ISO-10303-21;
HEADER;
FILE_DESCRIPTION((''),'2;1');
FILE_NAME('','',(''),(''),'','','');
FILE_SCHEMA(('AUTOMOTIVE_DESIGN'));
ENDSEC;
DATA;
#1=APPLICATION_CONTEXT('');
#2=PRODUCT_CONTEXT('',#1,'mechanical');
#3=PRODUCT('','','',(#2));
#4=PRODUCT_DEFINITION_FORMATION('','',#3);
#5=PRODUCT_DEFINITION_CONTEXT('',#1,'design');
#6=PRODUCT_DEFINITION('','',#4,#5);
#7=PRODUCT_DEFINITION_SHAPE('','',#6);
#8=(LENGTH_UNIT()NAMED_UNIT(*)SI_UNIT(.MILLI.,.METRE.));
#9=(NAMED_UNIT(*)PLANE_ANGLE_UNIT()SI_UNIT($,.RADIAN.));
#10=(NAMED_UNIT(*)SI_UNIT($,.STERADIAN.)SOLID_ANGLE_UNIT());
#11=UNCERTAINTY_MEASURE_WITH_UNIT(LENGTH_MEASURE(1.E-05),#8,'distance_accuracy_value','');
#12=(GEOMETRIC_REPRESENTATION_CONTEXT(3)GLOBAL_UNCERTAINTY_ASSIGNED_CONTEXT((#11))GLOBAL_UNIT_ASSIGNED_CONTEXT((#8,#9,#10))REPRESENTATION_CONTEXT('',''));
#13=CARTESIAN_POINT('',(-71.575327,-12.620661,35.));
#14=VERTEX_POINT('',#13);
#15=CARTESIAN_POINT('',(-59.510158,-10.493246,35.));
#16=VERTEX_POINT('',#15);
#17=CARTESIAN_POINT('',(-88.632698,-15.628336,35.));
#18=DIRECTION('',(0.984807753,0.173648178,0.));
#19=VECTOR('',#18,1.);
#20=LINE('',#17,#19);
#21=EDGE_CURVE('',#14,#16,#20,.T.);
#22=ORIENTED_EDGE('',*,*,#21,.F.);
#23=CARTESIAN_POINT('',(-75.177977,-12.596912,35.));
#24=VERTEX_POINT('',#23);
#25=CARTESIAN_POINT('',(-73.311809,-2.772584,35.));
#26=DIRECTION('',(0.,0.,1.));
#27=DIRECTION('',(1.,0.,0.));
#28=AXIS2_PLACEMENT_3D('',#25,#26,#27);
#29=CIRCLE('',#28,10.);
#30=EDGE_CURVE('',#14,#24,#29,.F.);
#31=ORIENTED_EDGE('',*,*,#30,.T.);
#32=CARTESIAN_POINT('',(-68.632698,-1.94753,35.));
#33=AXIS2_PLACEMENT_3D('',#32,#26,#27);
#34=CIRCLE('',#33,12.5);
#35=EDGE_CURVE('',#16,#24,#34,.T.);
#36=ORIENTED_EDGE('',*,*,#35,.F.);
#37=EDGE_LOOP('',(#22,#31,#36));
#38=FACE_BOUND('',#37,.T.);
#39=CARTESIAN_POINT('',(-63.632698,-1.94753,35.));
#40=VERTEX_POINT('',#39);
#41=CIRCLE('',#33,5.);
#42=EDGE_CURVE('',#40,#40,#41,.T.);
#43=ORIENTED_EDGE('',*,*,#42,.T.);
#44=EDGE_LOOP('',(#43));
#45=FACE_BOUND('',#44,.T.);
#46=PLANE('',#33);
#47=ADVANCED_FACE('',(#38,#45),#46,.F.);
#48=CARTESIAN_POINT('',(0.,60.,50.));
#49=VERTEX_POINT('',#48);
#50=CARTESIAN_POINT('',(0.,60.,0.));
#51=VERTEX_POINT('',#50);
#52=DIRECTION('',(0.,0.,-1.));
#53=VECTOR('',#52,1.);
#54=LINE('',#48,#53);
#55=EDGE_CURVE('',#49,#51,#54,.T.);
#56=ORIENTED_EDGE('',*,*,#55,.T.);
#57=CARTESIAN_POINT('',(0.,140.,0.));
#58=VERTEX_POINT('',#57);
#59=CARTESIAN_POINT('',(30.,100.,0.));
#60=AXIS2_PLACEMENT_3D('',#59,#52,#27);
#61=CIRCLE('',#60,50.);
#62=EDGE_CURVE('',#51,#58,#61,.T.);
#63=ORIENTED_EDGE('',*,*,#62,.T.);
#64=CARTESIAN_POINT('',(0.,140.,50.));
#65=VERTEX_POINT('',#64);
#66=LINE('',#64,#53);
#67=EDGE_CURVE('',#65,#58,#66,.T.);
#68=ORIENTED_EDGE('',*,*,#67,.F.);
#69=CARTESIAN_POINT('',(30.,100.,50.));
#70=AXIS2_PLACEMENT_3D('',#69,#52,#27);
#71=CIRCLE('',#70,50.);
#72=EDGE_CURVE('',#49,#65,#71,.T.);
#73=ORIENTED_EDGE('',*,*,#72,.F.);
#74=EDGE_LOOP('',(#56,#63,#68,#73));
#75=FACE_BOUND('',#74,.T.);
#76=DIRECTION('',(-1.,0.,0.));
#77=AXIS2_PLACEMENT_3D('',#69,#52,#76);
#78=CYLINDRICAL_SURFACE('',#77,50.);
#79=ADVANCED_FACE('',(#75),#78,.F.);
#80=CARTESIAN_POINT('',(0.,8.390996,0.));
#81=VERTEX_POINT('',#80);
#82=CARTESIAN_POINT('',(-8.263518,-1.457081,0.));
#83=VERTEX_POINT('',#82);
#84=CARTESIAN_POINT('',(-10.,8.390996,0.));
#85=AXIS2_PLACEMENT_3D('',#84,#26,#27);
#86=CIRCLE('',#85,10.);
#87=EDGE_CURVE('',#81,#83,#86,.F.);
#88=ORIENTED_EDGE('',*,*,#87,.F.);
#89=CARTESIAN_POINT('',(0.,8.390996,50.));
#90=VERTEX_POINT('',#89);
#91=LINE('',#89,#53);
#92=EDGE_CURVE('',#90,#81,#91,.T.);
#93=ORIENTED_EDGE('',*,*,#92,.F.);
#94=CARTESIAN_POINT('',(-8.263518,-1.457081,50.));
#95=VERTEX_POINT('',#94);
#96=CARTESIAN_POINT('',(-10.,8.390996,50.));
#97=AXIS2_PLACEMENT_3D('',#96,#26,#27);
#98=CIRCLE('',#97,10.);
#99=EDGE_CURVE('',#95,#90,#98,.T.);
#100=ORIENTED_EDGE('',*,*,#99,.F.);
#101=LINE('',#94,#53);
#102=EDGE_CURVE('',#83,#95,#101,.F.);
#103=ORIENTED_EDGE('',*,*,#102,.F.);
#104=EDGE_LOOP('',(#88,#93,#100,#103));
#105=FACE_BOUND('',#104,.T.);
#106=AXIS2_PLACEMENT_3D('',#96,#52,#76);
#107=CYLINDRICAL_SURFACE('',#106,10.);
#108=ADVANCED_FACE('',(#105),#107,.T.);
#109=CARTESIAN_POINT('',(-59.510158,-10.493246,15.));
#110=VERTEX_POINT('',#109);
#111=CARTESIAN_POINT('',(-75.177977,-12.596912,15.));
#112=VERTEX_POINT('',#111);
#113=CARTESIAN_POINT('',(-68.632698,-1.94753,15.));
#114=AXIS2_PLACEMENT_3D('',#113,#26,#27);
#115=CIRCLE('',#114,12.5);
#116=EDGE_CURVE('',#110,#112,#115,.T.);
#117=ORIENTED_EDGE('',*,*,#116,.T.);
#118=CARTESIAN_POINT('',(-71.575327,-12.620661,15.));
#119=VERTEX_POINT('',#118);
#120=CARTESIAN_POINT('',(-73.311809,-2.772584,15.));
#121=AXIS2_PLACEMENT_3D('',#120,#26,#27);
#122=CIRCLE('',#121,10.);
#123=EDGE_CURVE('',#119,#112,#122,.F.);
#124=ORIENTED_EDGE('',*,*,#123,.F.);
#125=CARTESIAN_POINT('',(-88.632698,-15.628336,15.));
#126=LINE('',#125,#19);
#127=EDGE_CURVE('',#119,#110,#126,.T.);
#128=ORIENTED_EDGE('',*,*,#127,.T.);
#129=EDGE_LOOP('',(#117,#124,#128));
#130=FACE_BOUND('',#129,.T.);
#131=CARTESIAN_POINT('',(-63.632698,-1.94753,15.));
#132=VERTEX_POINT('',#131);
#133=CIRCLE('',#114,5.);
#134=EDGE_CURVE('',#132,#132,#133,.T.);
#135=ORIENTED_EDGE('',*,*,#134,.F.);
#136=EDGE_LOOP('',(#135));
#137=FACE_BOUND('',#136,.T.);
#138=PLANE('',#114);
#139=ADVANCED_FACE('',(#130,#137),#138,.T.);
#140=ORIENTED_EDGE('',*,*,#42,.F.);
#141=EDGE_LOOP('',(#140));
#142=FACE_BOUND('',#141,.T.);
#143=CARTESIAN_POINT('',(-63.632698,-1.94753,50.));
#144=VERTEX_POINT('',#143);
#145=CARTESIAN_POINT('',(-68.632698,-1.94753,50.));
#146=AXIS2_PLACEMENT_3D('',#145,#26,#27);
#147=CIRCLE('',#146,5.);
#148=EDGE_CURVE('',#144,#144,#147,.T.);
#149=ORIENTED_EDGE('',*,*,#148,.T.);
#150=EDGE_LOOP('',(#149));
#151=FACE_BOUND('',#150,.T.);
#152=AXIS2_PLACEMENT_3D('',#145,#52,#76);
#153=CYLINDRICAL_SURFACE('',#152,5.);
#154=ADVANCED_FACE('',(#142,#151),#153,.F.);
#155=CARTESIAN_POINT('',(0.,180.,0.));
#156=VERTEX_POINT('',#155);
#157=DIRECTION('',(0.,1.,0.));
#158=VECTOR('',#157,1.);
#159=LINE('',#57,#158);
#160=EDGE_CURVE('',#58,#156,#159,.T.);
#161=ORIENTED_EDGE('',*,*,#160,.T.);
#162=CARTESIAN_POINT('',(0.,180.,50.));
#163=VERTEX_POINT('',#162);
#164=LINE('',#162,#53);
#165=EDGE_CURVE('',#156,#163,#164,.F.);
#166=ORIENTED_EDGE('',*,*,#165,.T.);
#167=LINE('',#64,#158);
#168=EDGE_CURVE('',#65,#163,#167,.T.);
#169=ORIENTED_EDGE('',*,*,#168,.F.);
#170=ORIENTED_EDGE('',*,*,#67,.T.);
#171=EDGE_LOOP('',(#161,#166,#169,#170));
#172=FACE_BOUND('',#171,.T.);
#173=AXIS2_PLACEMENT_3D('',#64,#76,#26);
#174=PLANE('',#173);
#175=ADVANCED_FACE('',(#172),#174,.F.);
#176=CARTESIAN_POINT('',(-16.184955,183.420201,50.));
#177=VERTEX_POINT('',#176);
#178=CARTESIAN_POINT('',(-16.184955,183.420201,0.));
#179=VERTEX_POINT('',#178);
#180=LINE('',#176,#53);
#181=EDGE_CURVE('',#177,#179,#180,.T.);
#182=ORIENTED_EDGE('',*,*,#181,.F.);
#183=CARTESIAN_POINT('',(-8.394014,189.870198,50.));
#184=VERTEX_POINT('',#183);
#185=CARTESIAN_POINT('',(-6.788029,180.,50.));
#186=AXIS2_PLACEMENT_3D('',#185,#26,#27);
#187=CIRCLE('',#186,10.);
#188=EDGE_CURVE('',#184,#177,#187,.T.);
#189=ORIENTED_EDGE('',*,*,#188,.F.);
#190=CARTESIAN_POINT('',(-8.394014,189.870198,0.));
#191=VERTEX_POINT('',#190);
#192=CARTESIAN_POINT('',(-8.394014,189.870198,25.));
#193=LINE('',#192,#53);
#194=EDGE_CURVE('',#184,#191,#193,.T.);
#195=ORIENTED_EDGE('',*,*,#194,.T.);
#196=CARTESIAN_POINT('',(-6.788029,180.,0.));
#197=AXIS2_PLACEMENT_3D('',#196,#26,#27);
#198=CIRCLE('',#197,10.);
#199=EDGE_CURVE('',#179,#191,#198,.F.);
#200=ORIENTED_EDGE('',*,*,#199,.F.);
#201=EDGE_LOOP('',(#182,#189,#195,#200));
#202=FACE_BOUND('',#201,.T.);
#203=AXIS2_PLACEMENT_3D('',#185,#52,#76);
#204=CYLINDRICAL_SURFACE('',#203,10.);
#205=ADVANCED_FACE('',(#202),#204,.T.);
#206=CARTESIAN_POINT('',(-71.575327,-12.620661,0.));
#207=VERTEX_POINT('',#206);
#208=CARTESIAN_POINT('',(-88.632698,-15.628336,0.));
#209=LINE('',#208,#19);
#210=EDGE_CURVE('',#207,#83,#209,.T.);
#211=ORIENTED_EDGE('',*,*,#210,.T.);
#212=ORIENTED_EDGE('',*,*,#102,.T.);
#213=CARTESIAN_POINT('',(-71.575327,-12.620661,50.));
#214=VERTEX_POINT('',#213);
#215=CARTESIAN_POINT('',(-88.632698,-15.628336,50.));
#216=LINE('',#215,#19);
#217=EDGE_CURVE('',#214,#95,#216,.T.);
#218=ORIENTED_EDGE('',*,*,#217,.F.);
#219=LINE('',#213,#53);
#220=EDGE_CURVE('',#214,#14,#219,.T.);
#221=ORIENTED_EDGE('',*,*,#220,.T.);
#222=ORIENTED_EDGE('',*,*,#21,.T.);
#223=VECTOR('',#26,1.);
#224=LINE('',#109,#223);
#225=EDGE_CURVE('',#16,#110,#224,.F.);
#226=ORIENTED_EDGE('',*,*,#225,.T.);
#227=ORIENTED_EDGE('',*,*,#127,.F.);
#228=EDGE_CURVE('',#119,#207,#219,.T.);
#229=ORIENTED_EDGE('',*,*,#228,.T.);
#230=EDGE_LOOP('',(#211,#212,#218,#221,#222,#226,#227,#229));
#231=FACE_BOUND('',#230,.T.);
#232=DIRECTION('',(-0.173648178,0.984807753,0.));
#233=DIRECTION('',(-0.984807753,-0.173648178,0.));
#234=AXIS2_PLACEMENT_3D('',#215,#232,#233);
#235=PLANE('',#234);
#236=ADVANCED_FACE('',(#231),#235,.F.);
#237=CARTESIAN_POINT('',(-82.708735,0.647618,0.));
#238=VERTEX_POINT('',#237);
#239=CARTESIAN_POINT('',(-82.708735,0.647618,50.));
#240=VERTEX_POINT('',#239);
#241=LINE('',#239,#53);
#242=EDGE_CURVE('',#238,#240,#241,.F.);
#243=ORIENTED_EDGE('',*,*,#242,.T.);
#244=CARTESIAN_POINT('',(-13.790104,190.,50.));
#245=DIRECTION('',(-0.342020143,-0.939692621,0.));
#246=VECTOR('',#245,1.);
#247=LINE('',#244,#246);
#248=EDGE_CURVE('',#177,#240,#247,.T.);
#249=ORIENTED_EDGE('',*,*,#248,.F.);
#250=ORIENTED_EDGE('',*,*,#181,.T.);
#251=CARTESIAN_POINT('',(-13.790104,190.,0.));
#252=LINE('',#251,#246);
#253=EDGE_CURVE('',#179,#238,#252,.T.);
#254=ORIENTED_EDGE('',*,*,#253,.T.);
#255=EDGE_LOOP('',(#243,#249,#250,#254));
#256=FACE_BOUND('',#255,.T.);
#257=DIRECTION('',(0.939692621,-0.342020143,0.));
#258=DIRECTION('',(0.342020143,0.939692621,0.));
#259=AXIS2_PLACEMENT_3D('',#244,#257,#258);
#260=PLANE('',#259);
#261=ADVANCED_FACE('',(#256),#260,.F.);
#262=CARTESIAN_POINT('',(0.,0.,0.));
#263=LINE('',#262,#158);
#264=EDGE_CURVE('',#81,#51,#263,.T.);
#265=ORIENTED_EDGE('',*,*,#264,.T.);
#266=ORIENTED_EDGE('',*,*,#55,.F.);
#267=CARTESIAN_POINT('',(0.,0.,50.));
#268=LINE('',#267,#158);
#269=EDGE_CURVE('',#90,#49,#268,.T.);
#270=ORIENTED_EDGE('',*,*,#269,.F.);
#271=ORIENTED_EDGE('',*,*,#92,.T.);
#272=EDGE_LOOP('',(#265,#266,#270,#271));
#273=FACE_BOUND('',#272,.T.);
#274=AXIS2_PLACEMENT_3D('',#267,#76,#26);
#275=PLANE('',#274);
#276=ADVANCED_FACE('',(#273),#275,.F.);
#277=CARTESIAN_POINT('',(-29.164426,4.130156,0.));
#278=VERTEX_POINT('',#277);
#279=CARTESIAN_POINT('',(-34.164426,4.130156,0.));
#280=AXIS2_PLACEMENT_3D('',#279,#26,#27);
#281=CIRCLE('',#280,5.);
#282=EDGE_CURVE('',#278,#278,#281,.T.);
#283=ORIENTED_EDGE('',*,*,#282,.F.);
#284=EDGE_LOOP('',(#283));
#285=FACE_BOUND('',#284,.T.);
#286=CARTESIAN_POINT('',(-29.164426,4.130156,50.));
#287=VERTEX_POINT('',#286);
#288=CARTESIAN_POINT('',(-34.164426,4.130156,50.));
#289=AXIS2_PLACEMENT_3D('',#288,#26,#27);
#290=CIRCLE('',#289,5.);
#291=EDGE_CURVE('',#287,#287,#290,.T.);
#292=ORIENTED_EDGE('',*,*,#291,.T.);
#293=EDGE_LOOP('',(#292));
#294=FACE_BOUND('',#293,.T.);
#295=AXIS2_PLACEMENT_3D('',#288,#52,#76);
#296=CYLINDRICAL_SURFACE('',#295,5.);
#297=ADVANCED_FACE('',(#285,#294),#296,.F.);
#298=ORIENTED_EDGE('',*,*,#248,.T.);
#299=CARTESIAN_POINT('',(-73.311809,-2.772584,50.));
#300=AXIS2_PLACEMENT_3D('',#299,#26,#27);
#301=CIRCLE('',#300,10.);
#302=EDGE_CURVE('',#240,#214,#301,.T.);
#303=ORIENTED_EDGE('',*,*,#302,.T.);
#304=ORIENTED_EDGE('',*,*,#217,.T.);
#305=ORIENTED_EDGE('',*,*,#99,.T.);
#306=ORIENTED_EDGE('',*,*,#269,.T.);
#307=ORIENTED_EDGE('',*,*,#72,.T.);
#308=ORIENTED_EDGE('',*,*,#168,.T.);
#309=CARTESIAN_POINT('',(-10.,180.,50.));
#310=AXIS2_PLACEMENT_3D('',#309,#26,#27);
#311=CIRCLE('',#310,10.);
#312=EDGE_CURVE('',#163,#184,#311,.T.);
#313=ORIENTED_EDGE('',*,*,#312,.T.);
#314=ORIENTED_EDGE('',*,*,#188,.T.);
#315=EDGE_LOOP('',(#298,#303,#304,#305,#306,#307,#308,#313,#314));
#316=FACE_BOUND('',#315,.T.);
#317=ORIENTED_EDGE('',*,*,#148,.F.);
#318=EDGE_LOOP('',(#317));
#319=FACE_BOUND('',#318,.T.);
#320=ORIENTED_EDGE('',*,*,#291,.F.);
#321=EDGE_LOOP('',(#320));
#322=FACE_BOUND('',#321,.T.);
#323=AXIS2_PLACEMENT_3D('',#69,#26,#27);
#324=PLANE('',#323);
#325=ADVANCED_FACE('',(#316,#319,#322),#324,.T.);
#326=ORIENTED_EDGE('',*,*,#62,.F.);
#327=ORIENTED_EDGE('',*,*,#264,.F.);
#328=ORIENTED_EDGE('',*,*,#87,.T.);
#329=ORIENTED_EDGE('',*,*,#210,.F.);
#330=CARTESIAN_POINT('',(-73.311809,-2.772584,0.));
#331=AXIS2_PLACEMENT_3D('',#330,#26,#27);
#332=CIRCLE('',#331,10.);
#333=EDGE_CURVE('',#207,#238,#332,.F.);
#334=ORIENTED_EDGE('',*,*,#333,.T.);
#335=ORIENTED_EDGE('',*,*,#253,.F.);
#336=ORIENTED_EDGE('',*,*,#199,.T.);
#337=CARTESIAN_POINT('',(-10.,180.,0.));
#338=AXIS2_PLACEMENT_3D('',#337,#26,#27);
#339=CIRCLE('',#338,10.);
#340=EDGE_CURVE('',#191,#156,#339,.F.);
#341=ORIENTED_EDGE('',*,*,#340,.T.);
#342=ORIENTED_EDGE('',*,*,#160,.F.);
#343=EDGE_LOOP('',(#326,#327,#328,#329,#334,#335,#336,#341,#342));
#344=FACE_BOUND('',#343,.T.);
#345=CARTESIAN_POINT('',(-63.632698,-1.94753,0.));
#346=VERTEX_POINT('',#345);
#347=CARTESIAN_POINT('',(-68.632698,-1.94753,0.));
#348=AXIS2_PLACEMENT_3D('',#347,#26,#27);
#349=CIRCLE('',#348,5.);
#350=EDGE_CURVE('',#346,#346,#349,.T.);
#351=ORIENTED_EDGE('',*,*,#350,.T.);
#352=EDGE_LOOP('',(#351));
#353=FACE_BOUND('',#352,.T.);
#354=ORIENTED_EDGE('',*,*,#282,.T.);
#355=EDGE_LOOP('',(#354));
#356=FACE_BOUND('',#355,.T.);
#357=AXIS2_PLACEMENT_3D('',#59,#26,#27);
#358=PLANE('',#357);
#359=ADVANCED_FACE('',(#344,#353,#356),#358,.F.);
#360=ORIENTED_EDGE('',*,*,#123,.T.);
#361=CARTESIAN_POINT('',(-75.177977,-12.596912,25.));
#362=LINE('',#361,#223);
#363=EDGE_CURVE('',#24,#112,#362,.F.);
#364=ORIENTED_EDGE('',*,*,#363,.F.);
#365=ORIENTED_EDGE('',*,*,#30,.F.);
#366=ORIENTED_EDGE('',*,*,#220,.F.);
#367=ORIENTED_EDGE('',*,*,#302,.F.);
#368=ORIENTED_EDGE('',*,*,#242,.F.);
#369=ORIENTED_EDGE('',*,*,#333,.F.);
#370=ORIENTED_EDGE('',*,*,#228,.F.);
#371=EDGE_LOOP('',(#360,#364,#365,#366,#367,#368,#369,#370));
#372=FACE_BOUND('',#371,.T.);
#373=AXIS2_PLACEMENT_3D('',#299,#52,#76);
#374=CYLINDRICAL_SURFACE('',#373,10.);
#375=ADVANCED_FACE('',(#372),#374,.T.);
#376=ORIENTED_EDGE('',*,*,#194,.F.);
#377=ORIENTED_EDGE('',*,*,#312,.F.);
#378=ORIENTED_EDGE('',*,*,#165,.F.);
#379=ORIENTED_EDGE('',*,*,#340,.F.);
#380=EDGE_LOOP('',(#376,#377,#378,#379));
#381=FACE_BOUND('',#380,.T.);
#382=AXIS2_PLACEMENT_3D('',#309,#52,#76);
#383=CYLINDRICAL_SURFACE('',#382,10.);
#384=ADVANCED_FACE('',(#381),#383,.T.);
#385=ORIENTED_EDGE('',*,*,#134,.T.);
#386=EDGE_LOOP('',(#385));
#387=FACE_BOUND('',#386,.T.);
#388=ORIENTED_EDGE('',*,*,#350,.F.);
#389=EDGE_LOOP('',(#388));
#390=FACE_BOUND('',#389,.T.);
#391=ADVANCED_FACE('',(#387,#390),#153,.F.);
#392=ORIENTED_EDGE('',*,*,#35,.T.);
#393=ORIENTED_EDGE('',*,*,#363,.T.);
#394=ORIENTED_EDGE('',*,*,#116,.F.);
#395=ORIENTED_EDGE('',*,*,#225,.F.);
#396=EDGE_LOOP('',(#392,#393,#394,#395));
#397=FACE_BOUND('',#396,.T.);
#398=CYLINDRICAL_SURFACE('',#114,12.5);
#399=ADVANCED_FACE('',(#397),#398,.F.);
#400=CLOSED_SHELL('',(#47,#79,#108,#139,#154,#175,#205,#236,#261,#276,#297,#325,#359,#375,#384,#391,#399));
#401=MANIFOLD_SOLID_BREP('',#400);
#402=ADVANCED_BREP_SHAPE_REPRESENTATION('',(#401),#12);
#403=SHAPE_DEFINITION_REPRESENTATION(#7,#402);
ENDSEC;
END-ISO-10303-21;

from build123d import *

# Parameters (mm, degrees)
SKETCH1_R           = 5
BOSS_EXTRUDE1_DEPTH = 50
FILLET2_R           = 10
SKETCH2_R           = 12.5
CUT_EXTRUDE2_DEPTH  = 10


with BuildPart() as part:
    # Sketch1 → Boss-Extrude1 (new body)
    with BuildSketch(Plane.XY):
        with BuildLine():
            Line((0, 0), (0, 60))
            ThreePointArc((0, 60), (-20, 100), (0, 140))
            Line((0, 140), (0, 190))
            Line((0, 190), (-13.790104149, 190))
            Line((-13.790104149, 190), (-88.632697771, -15.62833599))
            Line((-88.632697771, -15.62833599), (0, 0))
        make_face()
        with Locations((-68.632697771, -1.947530257)):
            Circle(SKETCH1_R, mode=Mode.SUBTRACT)
        with Locations((-34.164426416, 4.130155961)):
            Circle(SKETCH1_R, mode=Mode.SUBTRACT)
    extrude(amount=BOSS_EXTRUDE1_DEPTH)

    # Fillet2
    # the kernel refuses this fillet: 10 mm, written as the material it takes off along each edge
    with BuildSketch(Plane(origin=(0, 0, -20.977490779), x_dir=(0, 1, 0), z_dir=(0, 0, 1))) as fillet2_piece_1:
        with BuildLine():
            CenterArc((FILLET2_R * 0.839099631177, FILLET2_R), FILLET2_R, 190, 80)
            Line((-FILLET2_R * 0.145708121835, FILLET2_R * 0.826351822333), (0, 0))
            Line((0, 0), (FILLET2_R * 0.839099631177, 0))
        make_face()
    extrude(amount=91.954981559, mode=Mode.SUBTRACT)
    with BuildSketch(Plane(origin=(-88.632697771, -15.62833599, -43.301270189), x_dir=(0.34202014332567615, 0.9396926207859058, 0), z_dir=(0, 0, 1))) as fillet2_piece_2:
        with BuildLine():
            CenterArc((FILLET2_R * 1.73205080757, -FILLET2_R), FILLET2_R, 90, 120)
            Line((FILLET2_R * 0.866025403784, -FILLET2_R * 1.5), (0, 0))
            Line((0, 0), (FILLET2_R * 1.73205080757, 0))
        make_face()
    extrude(amount=136.602540378, mode=Mode.SUBTRACT)
    with BuildSketch(Plane(origin=(-13.790104149, 190, -17.505188455), x_dir=(1, 0, 0), z_dir=(0, 0, 1))) as fillet2_piece_3:
        with BuildLine():
            CenterArc((FILLET2_R * 0.70020753821, -FILLET2_R), FILLET2_R, 90, 70)
            Line((-FILLET2_R * 0.239485082576, -FILLET2_R * 0.657979856674), (0, 0))
            Line((0, 0), (FILLET2_R * 0.70020753821, 0))
        make_face()
    extrude(amount=85.01037691, mode=Mode.SUBTRACT)
    with BuildSketch(Plane(origin=(0, 190, -25), x_dir=(0, -1, 0), z_dir=(0, 0, 1))) as fillet2_piece_4:
        with BuildLine():
            CenterArc((FILLET2_R, -FILLET2_R), FILLET2_R, 90, 90)
            Line((0, -FILLET2_R), (0, 0))
            Line((0, 0), (FILLET2_R, 0))
        make_face()
    extrude(amount=100, mode=Mode.SUBTRACT)

    # Sketch2 → Cut-Extrude2 (cut, symmetric)
    with BuildSketch(Plane.XY.offset(25)):
        with Locations((-68.632697771, -1.947530257)):
            Circle(SKETCH2_R)
    extrude(amount=CUT_EXTRUDE2_DEPTH, both=True, mode=Mode.SUBTRACT)


solid = part.part
